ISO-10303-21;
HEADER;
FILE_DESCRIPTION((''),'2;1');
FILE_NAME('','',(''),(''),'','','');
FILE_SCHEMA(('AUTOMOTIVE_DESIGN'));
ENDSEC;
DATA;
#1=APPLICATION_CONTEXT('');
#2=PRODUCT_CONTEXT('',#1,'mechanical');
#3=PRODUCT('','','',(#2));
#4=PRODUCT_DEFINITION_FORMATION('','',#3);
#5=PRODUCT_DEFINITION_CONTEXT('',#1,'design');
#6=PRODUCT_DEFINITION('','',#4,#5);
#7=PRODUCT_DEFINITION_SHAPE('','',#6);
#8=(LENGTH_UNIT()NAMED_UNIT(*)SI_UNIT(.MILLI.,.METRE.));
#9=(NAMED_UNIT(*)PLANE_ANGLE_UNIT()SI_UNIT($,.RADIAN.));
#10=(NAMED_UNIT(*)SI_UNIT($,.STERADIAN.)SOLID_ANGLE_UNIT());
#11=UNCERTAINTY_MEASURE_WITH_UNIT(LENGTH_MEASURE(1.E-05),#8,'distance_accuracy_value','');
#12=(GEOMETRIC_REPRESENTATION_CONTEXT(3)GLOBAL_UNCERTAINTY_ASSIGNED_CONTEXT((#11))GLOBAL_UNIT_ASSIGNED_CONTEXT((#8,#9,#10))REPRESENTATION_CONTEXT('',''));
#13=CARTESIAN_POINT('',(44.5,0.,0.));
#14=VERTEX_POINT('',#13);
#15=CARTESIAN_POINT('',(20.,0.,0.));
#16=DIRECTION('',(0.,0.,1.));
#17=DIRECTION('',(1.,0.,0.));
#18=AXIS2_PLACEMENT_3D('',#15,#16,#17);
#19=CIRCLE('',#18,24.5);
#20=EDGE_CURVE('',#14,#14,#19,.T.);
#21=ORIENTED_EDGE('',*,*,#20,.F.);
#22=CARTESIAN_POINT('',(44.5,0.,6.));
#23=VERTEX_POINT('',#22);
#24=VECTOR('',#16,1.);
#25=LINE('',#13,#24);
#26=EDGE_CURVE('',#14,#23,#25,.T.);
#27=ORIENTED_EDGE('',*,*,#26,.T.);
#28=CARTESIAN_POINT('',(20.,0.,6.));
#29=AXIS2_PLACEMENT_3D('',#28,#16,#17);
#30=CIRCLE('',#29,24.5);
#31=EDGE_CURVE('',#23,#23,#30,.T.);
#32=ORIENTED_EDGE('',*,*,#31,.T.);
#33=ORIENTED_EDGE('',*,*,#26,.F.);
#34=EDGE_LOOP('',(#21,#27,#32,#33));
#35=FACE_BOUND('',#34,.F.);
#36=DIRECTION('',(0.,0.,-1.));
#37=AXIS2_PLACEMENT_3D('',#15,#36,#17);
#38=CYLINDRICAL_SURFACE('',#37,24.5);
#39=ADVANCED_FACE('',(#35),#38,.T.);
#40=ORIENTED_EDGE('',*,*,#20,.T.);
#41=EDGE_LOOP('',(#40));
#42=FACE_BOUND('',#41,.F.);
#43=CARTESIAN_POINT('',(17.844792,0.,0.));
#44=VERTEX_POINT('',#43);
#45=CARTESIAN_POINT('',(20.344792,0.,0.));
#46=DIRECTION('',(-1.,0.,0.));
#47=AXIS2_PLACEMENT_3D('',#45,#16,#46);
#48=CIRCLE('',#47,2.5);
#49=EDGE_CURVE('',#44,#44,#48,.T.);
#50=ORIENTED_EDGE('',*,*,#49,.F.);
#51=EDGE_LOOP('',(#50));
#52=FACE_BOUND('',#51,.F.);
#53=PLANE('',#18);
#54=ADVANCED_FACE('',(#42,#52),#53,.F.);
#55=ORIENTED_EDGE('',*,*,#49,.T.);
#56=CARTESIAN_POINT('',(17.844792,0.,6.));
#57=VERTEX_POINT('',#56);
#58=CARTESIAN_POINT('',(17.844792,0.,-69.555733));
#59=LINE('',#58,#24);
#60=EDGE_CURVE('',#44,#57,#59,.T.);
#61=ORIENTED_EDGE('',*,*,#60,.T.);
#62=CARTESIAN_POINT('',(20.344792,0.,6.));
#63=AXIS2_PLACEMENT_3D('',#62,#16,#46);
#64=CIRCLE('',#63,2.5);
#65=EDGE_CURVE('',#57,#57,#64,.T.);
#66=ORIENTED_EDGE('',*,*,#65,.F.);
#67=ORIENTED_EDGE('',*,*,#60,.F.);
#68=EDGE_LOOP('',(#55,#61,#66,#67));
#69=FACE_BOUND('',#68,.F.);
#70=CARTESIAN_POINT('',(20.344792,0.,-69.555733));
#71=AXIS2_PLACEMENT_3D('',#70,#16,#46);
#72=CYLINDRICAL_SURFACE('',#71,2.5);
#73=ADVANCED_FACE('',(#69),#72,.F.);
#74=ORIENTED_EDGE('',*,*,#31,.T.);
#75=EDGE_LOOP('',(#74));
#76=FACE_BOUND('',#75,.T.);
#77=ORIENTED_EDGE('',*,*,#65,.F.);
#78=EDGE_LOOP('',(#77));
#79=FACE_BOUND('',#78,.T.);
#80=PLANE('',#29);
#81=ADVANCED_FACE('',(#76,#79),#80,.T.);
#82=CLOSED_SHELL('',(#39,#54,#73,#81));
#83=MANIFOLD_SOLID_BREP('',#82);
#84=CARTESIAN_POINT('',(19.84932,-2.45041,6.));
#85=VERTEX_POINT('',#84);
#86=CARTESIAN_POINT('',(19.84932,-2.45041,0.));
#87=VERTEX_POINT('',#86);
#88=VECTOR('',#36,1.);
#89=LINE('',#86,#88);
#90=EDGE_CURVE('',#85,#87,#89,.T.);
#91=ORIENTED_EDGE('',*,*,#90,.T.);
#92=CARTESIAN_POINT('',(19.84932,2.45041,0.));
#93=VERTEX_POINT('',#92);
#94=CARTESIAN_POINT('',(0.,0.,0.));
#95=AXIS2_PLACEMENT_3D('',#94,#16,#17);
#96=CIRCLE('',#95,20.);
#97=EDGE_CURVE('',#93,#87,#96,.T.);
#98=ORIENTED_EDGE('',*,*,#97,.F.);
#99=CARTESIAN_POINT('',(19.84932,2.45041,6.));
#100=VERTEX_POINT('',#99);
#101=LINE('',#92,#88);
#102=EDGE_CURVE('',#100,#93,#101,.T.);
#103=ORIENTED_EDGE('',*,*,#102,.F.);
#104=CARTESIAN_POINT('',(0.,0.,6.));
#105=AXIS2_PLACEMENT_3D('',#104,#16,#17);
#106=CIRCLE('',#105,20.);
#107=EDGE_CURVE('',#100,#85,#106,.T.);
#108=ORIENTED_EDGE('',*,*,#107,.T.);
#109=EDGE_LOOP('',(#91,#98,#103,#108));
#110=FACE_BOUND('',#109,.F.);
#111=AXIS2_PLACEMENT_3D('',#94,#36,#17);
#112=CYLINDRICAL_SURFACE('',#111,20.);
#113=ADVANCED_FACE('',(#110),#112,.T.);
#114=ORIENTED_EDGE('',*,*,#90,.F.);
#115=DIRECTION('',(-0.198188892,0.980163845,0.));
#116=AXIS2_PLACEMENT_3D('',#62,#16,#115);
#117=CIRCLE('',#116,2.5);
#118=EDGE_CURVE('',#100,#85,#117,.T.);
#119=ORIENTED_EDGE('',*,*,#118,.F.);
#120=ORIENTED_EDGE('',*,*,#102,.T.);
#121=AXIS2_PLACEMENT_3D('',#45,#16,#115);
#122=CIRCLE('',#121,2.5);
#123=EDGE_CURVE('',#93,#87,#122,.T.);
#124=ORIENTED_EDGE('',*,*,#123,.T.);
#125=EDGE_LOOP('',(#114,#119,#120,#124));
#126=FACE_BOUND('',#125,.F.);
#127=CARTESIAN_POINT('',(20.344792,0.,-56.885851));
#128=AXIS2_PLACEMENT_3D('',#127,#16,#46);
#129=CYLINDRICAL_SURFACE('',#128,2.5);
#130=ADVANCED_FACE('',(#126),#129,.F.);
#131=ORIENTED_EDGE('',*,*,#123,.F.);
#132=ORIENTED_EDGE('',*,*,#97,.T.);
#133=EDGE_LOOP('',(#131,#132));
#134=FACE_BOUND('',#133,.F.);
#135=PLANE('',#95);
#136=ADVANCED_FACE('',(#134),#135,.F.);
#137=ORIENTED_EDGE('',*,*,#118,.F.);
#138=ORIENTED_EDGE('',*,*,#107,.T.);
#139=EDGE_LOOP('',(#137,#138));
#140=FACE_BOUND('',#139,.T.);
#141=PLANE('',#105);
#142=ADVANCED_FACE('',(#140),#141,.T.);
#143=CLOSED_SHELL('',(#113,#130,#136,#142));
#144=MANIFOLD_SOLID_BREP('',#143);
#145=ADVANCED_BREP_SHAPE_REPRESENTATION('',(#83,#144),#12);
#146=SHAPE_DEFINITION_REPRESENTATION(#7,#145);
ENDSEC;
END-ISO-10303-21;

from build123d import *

# Parameters (mm, degrees)
F0_R     = 20
F1_DEPTH = 6
F4_R     = 24.5
F5_DEPTH = 6
F8_D     = 5
F8_2_D   = 5


# Not quite as in the source:
# - a feature of the source that left no trace in its solid (it failed there, or was rolled back) is left out
# - the program builds the solid bodies; features that only make, move or delete a surface that nothing else refers to are left out


with BuildPart() as f1:
    # F0 (on Top) → F1 (new body)
    with BuildSketch(Plane.XY):
        Circle(F0_R)
    extrude(amount=F1_DEPTH)

    # F8 (through all)
    with Locations(Plane(origin=(0, 0, 0), x_dir=(1, 0, 0), z_dir=(0, 0, -1))):
        with Locations((20.3447919339, 0)):
            Hole(F8_D / 2)


with BuildPart() as f5:
    # F4 (on Top) → F5 (new body)
    with BuildSketch(Plane.XY):
        with Locations((20, 0)):
            Circle(F4_R)
    extrude(amount=F5_DEPTH)

    # F8#2 (through all)
    with Locations(Plane(origin=(0, 0, 0), x_dir=(1, 0, 0), z_dir=(0, 0, -1))):
        with Locations((20.3447919339, 0)):
            Hole(F8_2_D / 2)


solid = Compound([f1.part, f5.part])
